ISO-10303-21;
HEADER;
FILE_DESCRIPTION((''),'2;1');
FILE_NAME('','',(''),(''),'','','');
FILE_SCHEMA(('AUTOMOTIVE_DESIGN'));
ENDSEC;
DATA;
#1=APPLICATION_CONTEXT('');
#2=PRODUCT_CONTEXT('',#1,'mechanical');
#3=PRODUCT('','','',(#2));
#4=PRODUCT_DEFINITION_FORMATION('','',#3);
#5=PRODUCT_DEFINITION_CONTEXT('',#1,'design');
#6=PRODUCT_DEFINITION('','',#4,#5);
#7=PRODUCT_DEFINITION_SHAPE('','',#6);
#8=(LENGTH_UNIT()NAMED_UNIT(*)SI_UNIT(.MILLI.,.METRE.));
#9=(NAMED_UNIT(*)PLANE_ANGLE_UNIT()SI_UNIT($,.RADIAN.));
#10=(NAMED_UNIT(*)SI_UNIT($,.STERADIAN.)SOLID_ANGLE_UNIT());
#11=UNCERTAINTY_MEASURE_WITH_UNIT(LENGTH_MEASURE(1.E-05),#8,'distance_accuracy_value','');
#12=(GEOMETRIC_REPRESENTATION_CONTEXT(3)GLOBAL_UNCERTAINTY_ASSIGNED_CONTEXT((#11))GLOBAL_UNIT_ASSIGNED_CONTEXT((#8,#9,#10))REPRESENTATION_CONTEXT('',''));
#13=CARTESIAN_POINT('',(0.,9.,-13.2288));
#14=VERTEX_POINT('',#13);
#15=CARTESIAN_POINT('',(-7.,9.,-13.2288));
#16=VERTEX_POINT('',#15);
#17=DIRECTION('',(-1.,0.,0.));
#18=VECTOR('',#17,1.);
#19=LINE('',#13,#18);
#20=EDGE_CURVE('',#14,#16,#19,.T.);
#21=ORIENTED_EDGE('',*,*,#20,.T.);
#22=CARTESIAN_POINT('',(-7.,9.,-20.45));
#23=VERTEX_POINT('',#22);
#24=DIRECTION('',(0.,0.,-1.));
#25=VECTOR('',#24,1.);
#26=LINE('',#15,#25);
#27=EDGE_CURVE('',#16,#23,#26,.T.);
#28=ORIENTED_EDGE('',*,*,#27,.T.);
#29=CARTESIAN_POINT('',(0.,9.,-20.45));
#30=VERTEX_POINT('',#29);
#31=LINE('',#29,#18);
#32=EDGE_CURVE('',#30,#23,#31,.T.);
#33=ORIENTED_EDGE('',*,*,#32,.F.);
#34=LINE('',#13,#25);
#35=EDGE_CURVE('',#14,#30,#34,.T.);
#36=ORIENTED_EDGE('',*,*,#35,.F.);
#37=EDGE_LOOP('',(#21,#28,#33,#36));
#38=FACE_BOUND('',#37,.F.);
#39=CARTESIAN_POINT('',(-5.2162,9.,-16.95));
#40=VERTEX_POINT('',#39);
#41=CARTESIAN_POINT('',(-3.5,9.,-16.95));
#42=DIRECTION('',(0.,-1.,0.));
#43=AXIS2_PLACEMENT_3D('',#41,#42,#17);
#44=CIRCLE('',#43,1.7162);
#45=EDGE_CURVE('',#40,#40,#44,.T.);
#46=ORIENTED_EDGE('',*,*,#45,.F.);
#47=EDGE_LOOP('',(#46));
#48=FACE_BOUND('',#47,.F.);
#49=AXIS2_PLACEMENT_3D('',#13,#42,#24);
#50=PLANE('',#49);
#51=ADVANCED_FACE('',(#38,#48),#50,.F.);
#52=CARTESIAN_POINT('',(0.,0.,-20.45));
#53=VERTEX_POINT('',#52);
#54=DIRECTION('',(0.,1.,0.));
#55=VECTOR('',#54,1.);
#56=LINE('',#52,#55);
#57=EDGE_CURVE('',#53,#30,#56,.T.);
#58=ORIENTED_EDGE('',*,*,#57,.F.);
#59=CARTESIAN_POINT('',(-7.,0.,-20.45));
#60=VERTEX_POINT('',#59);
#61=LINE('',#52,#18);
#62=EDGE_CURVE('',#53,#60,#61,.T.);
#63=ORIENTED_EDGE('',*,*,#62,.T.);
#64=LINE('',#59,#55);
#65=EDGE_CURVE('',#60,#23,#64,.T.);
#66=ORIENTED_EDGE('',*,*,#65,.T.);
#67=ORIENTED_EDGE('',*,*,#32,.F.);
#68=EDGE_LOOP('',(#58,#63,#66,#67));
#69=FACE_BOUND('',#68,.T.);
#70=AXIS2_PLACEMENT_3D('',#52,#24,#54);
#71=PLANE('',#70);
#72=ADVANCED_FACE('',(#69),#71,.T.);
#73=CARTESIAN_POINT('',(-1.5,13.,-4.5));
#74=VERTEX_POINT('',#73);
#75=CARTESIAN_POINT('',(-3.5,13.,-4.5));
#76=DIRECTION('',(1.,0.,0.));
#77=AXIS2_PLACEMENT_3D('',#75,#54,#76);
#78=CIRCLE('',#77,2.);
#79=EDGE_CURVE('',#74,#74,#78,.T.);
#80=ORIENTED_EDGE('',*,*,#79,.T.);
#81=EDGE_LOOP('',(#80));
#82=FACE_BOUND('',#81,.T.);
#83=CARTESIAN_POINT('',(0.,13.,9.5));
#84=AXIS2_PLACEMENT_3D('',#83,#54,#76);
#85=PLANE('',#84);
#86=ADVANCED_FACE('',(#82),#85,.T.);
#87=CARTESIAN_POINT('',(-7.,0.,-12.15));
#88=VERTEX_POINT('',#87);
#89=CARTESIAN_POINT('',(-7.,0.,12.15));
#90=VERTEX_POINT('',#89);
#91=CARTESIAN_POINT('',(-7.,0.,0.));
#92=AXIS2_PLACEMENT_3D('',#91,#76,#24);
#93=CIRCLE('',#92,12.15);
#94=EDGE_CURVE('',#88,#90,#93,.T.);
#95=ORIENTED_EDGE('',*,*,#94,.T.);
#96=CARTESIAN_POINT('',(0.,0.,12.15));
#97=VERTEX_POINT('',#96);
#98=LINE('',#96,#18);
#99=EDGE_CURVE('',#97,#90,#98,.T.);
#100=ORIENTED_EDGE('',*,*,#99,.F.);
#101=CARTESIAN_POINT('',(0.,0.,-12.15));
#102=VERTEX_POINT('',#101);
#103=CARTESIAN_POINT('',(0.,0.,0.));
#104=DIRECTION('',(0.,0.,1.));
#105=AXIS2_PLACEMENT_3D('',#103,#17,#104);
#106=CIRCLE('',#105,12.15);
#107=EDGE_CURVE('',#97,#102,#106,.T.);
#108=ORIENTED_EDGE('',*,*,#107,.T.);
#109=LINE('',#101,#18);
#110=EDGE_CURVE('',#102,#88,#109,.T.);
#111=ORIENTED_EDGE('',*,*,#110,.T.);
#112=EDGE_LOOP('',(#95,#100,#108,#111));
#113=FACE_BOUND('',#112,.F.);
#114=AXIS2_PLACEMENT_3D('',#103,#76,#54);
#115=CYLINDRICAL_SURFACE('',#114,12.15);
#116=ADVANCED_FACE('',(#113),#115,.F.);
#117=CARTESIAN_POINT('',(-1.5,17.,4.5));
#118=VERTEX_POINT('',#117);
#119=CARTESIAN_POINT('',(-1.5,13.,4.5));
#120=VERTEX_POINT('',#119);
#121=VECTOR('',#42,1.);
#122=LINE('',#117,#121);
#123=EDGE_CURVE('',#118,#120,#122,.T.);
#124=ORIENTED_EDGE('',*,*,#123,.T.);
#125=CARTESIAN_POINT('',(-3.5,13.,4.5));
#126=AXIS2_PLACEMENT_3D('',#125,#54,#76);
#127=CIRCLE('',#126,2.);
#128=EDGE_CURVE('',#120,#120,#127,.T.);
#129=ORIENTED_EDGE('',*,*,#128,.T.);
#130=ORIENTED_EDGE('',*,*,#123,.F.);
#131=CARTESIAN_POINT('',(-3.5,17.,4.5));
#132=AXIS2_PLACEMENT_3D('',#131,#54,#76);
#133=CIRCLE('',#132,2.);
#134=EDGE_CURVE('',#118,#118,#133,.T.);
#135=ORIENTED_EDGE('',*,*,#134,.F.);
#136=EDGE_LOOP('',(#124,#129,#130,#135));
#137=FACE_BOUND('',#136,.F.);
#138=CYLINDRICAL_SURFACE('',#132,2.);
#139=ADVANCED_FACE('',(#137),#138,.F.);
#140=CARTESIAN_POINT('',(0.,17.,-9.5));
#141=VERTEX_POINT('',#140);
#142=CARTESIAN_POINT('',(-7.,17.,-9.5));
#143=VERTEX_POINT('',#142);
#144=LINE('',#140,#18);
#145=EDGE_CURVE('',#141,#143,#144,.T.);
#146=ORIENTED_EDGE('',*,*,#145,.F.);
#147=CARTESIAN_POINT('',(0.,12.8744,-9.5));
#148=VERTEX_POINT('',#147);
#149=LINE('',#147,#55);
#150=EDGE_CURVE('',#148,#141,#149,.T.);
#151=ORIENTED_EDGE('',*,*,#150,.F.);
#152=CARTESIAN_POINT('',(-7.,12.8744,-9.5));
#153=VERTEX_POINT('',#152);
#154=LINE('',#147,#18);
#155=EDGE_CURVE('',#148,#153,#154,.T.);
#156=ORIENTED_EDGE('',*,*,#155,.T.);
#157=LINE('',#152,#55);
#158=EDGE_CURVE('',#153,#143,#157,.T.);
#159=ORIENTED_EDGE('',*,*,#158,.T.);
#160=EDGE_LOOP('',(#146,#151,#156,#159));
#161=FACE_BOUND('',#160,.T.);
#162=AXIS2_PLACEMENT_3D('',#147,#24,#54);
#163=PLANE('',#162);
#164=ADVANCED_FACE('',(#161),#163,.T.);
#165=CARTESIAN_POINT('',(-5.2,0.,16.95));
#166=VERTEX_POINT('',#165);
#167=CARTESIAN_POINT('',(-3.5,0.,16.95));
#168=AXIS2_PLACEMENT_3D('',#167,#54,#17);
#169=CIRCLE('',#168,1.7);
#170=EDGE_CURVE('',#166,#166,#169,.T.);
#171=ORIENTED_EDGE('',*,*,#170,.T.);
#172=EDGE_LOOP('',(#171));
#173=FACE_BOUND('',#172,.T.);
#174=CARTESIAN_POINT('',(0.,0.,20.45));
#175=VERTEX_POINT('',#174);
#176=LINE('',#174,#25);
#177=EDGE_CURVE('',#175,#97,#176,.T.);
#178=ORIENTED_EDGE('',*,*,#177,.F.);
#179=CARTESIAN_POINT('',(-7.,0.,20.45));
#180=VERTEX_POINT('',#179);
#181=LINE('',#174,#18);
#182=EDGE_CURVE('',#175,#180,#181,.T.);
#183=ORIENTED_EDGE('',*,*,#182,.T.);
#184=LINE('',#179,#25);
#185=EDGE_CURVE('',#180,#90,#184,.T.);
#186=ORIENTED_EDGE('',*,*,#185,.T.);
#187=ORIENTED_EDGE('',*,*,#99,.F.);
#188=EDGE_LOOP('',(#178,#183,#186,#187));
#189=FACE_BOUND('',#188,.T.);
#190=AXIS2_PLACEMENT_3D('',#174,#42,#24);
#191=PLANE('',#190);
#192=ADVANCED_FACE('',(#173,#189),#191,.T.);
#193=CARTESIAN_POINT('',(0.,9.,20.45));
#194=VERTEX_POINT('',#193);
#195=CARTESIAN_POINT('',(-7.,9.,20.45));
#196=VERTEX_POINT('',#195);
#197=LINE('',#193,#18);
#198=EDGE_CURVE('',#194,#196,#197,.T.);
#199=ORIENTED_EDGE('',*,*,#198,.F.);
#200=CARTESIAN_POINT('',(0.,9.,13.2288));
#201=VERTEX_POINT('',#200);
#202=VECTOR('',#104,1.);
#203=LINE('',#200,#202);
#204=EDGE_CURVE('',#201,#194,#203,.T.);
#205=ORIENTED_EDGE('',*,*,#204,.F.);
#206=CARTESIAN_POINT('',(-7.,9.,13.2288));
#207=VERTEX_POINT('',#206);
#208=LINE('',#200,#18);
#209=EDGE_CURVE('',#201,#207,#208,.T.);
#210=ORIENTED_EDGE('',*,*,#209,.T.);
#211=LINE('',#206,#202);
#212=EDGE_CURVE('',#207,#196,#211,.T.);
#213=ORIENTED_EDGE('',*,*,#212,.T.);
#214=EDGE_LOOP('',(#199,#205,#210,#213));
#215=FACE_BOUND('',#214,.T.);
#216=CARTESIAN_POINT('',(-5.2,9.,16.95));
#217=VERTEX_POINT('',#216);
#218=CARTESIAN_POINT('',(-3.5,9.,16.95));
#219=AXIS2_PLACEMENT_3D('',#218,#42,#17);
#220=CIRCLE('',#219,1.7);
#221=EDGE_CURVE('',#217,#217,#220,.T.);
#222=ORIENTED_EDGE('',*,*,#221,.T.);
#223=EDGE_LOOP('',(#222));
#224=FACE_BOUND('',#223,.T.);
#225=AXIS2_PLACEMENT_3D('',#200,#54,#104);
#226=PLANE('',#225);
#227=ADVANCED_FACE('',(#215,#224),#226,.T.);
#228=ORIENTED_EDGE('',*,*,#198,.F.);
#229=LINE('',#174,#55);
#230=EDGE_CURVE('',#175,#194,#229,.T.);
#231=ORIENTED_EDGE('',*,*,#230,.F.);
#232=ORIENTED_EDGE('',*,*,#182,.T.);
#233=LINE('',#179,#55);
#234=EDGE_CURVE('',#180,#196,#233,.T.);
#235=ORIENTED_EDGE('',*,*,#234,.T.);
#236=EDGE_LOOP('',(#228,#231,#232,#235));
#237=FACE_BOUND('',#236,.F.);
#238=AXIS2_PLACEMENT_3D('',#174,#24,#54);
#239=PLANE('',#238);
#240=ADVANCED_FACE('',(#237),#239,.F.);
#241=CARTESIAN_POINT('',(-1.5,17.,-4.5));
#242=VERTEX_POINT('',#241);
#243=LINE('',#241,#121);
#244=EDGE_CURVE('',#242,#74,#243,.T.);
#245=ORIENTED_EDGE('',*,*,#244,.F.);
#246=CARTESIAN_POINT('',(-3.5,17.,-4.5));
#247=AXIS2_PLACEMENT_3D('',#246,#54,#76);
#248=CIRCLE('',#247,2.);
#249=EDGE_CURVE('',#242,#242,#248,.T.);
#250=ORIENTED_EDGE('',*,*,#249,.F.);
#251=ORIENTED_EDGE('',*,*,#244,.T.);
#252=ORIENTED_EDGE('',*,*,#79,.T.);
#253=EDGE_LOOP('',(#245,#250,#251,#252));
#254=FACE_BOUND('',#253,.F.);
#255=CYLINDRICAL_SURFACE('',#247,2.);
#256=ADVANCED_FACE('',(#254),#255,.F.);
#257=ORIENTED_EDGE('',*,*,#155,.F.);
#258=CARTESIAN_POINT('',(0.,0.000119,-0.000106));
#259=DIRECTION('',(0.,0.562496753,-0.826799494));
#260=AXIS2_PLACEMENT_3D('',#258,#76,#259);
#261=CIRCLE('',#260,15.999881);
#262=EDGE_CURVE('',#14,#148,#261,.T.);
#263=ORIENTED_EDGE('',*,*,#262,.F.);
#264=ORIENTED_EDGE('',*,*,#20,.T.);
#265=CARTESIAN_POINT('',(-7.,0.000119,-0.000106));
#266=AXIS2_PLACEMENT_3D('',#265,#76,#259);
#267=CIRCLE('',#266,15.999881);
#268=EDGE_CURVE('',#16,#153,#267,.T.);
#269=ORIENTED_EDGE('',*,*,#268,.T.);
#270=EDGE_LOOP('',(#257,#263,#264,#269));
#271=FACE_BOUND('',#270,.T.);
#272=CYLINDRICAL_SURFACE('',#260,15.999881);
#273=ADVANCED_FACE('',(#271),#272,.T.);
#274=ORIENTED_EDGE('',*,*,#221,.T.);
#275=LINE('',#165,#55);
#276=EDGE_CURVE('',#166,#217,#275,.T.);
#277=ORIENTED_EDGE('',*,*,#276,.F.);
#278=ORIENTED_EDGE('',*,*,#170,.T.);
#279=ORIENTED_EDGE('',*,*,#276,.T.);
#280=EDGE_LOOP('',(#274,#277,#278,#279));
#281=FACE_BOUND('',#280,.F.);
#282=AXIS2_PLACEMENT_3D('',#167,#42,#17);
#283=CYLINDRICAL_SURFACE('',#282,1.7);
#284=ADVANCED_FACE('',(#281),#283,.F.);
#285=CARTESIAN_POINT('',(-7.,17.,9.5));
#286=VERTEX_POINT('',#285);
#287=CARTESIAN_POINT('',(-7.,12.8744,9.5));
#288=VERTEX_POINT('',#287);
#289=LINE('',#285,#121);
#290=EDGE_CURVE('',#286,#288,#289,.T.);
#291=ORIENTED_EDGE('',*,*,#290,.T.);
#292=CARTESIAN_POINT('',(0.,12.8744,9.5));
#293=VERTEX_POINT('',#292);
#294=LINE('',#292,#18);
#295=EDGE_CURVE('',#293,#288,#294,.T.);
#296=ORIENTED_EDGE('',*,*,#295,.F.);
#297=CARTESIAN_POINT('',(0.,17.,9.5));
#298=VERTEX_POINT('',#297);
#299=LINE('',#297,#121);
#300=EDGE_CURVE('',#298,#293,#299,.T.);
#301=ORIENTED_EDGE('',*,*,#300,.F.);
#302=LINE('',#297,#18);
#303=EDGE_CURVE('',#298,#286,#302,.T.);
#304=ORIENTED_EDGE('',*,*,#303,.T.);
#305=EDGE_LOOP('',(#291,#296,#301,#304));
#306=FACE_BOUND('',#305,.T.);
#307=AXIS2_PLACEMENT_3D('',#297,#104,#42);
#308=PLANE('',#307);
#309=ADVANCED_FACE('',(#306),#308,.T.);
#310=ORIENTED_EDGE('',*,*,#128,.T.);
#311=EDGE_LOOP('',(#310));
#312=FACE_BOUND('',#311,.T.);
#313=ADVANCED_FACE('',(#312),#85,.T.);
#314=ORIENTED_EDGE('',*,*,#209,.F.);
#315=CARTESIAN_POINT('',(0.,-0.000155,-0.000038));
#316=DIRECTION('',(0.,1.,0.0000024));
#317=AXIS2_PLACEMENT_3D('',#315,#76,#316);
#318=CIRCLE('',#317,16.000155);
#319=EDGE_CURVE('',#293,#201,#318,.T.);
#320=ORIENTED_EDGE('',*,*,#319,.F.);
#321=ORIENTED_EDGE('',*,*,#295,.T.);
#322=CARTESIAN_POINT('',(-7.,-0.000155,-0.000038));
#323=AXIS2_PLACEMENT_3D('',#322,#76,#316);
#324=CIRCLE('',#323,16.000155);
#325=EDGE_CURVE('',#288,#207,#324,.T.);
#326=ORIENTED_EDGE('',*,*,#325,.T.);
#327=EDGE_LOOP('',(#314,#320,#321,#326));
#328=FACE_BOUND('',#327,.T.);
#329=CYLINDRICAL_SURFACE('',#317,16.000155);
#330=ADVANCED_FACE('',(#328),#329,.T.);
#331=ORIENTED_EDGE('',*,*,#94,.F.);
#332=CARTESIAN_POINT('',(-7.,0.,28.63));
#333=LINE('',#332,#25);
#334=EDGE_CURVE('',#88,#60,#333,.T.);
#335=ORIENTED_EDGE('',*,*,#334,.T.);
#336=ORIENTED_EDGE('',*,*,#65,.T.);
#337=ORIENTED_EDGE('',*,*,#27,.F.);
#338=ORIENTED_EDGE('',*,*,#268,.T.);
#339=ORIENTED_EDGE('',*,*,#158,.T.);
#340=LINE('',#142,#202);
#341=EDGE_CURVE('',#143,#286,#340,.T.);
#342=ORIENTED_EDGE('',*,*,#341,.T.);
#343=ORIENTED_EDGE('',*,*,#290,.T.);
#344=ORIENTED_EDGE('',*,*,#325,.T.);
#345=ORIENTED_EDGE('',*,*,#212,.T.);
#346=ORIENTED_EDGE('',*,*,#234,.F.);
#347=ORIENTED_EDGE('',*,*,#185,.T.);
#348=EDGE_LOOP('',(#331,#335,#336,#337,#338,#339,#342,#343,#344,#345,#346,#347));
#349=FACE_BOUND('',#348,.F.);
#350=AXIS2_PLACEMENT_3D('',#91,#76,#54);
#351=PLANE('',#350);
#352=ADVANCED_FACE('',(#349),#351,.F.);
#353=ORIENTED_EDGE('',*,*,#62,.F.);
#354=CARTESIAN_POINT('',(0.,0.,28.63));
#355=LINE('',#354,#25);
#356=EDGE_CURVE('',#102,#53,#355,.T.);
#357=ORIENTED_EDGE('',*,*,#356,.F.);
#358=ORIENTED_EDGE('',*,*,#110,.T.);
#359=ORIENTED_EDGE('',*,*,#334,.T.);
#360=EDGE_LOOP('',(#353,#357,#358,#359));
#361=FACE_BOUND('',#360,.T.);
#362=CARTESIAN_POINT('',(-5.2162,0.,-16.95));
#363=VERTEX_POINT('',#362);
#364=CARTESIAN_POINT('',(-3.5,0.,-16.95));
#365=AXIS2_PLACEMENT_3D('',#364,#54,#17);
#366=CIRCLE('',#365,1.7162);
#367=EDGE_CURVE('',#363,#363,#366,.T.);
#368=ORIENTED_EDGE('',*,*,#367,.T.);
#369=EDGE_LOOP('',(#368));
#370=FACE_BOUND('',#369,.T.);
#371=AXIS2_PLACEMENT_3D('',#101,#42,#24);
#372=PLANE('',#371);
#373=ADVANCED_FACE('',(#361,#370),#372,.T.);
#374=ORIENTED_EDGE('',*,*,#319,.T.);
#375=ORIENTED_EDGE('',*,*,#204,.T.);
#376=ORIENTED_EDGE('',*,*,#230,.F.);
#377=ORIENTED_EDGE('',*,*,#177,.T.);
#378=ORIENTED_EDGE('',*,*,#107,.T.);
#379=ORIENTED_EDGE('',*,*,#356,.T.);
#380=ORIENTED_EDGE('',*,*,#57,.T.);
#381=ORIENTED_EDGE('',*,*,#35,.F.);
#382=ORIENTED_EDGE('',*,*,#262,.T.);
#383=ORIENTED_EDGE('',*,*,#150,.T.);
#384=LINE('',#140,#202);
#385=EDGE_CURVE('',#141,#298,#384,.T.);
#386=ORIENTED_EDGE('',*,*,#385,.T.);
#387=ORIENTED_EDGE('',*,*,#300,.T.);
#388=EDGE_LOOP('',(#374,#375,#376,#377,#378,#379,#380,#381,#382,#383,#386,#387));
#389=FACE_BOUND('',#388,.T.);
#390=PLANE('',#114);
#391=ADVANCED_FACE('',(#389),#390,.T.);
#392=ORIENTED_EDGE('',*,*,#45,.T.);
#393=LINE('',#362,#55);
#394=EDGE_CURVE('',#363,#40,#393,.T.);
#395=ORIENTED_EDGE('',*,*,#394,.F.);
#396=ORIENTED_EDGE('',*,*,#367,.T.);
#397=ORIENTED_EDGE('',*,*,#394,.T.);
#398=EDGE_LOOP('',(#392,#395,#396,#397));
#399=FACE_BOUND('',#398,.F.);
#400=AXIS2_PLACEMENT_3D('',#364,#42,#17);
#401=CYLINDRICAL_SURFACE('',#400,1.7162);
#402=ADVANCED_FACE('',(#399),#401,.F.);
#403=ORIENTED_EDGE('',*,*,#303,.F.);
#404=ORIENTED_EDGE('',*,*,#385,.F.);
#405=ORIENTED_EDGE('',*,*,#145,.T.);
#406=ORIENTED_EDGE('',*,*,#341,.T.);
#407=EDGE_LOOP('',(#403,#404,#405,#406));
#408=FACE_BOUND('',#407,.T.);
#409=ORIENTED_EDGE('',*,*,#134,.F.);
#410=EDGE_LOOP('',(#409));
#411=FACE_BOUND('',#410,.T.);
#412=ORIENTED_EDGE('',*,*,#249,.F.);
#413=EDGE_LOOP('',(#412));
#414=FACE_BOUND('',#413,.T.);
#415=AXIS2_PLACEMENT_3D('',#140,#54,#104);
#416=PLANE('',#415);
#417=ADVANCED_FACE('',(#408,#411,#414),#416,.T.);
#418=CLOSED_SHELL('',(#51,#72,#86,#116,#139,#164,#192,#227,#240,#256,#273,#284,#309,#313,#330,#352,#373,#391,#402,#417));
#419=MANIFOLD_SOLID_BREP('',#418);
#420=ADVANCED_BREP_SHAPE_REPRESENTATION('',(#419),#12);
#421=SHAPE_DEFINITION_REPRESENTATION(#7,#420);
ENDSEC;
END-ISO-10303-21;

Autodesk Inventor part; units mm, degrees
ref_plane "YZ Plane" through (0, 0, 0) normal (1, 0, 0) x (0, 1, 0)
ref_plane "XZ Plane" through (0, 0, 0) normal (0, 1, 0) x (-1, 0, 0)
ref_plane "XY Plane" through (0, 0, 0) normal (0, 0, 1) x (1, 0, 0)
sketch "Skizze1" plane through (0, 0, 0) normal (1, 0, 0) x (0, 1, 0)
  circle A0 centre (0, 0) radius 12.15
  line L0 (0, 16.95) -> (23.4061, 16.95) construction
  line L1 (0, 20.45) -> (9, 20.45)
  arc A1 (16, 0) -> (9, 13.2288) centre (0, 0) ccw
  line L2 (9, 13.2288) -> (9, 20.45)
  line L3 (0, 20.45) -> (0, 12.15)
  line L4 (0, 28.63) -> (0, -28.63) projected
  line L5 (0, 0) -> (16, 0)
  line L6 (0, -20.45) -> (9, -20.45)
  arc A2 (9, -13.2288) -> (16, 0) centre (0, 0) ccw
  line L7 (9, -13.2288) -> (9, -20.45)
  line L8 (0, -20.45) -> (0, -12.15)
  point P0 (0, -12.15)
  dimension "d0" = 24.3
  dimension "d1" = 16.95
  dimension "d2" = 20.45
  dimension "d3" = 9
  dimension "d4" = 16
extrude "Extrusion1" add sketch "Skizze1" against normal blind 7 contours L5 A2 L7 L6 L4 A0 | A0 L3 L1 L2 A1 L5
sketch "Skizze2" plane through (0, 0, 0) normal (0, 1, 0) x (-1, 0, 0)
  circle A0 centre (3.5, 16.95) radius 1.7
  circle A1 centre (3.5, -16.95) radius 1.7162
  line L0 (0, 20.45) -> (7, 20.45) projected
  line L1 (-1.4, 0) -> (8.4, 0) projected
  point P0 (0, 0)
  point P1 (3.5, 20.45)
  point P2 (3.5, 20.45)
  dimension "d9" = 33.9
  dimension "d10" = 3.4
extrude "Extrusion2" cut sketch "Skizze2" along normal through all
sketch "Skizze3" plane through (0, 0, 0) normal (1, 0, 0) x (0, 1, 0)
  arc A0 (9, -13.2288) -> (9, 13.2288) centre (0, 0) ccw projected
  arc A1 (9, -13.2288) -> (9, 13.2288) centre (0, 0) ccw projected
  line L0 (17, 9.5) -> (12.8744, 9.5)
  line L1 (12.8744, 9.5) -> (12.8744, -9.5)
  line L2 (12.8744, -9.5) -> (17, -9.5)
  line L3 (17, -9.5) -> (17, 9.5)
  line L4 (0, -12.15) -> (0, -20.45) projected
  point P0 (12.8744, -9.5)
  dimension "d14" = 19
  dimension "d22" = 17
extrude "Extrusion3" add sketch "Skizze3" against normal up to surface (7 mm away) contours A0 L0 L3 L2
sketch "Skizze4" plane through (0, 17, 9.5) normal (0, 1, 0) x (1, 0, 0)
  circle A0 centre (-3.5, 5) radius 2
  circle A1 centre (-3.5, 14) radius 2
  line L0 (0, 9.5) -> (-10.2525, 9.5)
  line L1 (0, 19) -> (-7, 19) projected
  point P0 (-3.5, 19)
  dimension "d17" = 4
  dimension "d18" = 9
extrude "Extrusion4" cut sketch "Skizze4" against normal blind 4
properties part number "Motorhalter"
